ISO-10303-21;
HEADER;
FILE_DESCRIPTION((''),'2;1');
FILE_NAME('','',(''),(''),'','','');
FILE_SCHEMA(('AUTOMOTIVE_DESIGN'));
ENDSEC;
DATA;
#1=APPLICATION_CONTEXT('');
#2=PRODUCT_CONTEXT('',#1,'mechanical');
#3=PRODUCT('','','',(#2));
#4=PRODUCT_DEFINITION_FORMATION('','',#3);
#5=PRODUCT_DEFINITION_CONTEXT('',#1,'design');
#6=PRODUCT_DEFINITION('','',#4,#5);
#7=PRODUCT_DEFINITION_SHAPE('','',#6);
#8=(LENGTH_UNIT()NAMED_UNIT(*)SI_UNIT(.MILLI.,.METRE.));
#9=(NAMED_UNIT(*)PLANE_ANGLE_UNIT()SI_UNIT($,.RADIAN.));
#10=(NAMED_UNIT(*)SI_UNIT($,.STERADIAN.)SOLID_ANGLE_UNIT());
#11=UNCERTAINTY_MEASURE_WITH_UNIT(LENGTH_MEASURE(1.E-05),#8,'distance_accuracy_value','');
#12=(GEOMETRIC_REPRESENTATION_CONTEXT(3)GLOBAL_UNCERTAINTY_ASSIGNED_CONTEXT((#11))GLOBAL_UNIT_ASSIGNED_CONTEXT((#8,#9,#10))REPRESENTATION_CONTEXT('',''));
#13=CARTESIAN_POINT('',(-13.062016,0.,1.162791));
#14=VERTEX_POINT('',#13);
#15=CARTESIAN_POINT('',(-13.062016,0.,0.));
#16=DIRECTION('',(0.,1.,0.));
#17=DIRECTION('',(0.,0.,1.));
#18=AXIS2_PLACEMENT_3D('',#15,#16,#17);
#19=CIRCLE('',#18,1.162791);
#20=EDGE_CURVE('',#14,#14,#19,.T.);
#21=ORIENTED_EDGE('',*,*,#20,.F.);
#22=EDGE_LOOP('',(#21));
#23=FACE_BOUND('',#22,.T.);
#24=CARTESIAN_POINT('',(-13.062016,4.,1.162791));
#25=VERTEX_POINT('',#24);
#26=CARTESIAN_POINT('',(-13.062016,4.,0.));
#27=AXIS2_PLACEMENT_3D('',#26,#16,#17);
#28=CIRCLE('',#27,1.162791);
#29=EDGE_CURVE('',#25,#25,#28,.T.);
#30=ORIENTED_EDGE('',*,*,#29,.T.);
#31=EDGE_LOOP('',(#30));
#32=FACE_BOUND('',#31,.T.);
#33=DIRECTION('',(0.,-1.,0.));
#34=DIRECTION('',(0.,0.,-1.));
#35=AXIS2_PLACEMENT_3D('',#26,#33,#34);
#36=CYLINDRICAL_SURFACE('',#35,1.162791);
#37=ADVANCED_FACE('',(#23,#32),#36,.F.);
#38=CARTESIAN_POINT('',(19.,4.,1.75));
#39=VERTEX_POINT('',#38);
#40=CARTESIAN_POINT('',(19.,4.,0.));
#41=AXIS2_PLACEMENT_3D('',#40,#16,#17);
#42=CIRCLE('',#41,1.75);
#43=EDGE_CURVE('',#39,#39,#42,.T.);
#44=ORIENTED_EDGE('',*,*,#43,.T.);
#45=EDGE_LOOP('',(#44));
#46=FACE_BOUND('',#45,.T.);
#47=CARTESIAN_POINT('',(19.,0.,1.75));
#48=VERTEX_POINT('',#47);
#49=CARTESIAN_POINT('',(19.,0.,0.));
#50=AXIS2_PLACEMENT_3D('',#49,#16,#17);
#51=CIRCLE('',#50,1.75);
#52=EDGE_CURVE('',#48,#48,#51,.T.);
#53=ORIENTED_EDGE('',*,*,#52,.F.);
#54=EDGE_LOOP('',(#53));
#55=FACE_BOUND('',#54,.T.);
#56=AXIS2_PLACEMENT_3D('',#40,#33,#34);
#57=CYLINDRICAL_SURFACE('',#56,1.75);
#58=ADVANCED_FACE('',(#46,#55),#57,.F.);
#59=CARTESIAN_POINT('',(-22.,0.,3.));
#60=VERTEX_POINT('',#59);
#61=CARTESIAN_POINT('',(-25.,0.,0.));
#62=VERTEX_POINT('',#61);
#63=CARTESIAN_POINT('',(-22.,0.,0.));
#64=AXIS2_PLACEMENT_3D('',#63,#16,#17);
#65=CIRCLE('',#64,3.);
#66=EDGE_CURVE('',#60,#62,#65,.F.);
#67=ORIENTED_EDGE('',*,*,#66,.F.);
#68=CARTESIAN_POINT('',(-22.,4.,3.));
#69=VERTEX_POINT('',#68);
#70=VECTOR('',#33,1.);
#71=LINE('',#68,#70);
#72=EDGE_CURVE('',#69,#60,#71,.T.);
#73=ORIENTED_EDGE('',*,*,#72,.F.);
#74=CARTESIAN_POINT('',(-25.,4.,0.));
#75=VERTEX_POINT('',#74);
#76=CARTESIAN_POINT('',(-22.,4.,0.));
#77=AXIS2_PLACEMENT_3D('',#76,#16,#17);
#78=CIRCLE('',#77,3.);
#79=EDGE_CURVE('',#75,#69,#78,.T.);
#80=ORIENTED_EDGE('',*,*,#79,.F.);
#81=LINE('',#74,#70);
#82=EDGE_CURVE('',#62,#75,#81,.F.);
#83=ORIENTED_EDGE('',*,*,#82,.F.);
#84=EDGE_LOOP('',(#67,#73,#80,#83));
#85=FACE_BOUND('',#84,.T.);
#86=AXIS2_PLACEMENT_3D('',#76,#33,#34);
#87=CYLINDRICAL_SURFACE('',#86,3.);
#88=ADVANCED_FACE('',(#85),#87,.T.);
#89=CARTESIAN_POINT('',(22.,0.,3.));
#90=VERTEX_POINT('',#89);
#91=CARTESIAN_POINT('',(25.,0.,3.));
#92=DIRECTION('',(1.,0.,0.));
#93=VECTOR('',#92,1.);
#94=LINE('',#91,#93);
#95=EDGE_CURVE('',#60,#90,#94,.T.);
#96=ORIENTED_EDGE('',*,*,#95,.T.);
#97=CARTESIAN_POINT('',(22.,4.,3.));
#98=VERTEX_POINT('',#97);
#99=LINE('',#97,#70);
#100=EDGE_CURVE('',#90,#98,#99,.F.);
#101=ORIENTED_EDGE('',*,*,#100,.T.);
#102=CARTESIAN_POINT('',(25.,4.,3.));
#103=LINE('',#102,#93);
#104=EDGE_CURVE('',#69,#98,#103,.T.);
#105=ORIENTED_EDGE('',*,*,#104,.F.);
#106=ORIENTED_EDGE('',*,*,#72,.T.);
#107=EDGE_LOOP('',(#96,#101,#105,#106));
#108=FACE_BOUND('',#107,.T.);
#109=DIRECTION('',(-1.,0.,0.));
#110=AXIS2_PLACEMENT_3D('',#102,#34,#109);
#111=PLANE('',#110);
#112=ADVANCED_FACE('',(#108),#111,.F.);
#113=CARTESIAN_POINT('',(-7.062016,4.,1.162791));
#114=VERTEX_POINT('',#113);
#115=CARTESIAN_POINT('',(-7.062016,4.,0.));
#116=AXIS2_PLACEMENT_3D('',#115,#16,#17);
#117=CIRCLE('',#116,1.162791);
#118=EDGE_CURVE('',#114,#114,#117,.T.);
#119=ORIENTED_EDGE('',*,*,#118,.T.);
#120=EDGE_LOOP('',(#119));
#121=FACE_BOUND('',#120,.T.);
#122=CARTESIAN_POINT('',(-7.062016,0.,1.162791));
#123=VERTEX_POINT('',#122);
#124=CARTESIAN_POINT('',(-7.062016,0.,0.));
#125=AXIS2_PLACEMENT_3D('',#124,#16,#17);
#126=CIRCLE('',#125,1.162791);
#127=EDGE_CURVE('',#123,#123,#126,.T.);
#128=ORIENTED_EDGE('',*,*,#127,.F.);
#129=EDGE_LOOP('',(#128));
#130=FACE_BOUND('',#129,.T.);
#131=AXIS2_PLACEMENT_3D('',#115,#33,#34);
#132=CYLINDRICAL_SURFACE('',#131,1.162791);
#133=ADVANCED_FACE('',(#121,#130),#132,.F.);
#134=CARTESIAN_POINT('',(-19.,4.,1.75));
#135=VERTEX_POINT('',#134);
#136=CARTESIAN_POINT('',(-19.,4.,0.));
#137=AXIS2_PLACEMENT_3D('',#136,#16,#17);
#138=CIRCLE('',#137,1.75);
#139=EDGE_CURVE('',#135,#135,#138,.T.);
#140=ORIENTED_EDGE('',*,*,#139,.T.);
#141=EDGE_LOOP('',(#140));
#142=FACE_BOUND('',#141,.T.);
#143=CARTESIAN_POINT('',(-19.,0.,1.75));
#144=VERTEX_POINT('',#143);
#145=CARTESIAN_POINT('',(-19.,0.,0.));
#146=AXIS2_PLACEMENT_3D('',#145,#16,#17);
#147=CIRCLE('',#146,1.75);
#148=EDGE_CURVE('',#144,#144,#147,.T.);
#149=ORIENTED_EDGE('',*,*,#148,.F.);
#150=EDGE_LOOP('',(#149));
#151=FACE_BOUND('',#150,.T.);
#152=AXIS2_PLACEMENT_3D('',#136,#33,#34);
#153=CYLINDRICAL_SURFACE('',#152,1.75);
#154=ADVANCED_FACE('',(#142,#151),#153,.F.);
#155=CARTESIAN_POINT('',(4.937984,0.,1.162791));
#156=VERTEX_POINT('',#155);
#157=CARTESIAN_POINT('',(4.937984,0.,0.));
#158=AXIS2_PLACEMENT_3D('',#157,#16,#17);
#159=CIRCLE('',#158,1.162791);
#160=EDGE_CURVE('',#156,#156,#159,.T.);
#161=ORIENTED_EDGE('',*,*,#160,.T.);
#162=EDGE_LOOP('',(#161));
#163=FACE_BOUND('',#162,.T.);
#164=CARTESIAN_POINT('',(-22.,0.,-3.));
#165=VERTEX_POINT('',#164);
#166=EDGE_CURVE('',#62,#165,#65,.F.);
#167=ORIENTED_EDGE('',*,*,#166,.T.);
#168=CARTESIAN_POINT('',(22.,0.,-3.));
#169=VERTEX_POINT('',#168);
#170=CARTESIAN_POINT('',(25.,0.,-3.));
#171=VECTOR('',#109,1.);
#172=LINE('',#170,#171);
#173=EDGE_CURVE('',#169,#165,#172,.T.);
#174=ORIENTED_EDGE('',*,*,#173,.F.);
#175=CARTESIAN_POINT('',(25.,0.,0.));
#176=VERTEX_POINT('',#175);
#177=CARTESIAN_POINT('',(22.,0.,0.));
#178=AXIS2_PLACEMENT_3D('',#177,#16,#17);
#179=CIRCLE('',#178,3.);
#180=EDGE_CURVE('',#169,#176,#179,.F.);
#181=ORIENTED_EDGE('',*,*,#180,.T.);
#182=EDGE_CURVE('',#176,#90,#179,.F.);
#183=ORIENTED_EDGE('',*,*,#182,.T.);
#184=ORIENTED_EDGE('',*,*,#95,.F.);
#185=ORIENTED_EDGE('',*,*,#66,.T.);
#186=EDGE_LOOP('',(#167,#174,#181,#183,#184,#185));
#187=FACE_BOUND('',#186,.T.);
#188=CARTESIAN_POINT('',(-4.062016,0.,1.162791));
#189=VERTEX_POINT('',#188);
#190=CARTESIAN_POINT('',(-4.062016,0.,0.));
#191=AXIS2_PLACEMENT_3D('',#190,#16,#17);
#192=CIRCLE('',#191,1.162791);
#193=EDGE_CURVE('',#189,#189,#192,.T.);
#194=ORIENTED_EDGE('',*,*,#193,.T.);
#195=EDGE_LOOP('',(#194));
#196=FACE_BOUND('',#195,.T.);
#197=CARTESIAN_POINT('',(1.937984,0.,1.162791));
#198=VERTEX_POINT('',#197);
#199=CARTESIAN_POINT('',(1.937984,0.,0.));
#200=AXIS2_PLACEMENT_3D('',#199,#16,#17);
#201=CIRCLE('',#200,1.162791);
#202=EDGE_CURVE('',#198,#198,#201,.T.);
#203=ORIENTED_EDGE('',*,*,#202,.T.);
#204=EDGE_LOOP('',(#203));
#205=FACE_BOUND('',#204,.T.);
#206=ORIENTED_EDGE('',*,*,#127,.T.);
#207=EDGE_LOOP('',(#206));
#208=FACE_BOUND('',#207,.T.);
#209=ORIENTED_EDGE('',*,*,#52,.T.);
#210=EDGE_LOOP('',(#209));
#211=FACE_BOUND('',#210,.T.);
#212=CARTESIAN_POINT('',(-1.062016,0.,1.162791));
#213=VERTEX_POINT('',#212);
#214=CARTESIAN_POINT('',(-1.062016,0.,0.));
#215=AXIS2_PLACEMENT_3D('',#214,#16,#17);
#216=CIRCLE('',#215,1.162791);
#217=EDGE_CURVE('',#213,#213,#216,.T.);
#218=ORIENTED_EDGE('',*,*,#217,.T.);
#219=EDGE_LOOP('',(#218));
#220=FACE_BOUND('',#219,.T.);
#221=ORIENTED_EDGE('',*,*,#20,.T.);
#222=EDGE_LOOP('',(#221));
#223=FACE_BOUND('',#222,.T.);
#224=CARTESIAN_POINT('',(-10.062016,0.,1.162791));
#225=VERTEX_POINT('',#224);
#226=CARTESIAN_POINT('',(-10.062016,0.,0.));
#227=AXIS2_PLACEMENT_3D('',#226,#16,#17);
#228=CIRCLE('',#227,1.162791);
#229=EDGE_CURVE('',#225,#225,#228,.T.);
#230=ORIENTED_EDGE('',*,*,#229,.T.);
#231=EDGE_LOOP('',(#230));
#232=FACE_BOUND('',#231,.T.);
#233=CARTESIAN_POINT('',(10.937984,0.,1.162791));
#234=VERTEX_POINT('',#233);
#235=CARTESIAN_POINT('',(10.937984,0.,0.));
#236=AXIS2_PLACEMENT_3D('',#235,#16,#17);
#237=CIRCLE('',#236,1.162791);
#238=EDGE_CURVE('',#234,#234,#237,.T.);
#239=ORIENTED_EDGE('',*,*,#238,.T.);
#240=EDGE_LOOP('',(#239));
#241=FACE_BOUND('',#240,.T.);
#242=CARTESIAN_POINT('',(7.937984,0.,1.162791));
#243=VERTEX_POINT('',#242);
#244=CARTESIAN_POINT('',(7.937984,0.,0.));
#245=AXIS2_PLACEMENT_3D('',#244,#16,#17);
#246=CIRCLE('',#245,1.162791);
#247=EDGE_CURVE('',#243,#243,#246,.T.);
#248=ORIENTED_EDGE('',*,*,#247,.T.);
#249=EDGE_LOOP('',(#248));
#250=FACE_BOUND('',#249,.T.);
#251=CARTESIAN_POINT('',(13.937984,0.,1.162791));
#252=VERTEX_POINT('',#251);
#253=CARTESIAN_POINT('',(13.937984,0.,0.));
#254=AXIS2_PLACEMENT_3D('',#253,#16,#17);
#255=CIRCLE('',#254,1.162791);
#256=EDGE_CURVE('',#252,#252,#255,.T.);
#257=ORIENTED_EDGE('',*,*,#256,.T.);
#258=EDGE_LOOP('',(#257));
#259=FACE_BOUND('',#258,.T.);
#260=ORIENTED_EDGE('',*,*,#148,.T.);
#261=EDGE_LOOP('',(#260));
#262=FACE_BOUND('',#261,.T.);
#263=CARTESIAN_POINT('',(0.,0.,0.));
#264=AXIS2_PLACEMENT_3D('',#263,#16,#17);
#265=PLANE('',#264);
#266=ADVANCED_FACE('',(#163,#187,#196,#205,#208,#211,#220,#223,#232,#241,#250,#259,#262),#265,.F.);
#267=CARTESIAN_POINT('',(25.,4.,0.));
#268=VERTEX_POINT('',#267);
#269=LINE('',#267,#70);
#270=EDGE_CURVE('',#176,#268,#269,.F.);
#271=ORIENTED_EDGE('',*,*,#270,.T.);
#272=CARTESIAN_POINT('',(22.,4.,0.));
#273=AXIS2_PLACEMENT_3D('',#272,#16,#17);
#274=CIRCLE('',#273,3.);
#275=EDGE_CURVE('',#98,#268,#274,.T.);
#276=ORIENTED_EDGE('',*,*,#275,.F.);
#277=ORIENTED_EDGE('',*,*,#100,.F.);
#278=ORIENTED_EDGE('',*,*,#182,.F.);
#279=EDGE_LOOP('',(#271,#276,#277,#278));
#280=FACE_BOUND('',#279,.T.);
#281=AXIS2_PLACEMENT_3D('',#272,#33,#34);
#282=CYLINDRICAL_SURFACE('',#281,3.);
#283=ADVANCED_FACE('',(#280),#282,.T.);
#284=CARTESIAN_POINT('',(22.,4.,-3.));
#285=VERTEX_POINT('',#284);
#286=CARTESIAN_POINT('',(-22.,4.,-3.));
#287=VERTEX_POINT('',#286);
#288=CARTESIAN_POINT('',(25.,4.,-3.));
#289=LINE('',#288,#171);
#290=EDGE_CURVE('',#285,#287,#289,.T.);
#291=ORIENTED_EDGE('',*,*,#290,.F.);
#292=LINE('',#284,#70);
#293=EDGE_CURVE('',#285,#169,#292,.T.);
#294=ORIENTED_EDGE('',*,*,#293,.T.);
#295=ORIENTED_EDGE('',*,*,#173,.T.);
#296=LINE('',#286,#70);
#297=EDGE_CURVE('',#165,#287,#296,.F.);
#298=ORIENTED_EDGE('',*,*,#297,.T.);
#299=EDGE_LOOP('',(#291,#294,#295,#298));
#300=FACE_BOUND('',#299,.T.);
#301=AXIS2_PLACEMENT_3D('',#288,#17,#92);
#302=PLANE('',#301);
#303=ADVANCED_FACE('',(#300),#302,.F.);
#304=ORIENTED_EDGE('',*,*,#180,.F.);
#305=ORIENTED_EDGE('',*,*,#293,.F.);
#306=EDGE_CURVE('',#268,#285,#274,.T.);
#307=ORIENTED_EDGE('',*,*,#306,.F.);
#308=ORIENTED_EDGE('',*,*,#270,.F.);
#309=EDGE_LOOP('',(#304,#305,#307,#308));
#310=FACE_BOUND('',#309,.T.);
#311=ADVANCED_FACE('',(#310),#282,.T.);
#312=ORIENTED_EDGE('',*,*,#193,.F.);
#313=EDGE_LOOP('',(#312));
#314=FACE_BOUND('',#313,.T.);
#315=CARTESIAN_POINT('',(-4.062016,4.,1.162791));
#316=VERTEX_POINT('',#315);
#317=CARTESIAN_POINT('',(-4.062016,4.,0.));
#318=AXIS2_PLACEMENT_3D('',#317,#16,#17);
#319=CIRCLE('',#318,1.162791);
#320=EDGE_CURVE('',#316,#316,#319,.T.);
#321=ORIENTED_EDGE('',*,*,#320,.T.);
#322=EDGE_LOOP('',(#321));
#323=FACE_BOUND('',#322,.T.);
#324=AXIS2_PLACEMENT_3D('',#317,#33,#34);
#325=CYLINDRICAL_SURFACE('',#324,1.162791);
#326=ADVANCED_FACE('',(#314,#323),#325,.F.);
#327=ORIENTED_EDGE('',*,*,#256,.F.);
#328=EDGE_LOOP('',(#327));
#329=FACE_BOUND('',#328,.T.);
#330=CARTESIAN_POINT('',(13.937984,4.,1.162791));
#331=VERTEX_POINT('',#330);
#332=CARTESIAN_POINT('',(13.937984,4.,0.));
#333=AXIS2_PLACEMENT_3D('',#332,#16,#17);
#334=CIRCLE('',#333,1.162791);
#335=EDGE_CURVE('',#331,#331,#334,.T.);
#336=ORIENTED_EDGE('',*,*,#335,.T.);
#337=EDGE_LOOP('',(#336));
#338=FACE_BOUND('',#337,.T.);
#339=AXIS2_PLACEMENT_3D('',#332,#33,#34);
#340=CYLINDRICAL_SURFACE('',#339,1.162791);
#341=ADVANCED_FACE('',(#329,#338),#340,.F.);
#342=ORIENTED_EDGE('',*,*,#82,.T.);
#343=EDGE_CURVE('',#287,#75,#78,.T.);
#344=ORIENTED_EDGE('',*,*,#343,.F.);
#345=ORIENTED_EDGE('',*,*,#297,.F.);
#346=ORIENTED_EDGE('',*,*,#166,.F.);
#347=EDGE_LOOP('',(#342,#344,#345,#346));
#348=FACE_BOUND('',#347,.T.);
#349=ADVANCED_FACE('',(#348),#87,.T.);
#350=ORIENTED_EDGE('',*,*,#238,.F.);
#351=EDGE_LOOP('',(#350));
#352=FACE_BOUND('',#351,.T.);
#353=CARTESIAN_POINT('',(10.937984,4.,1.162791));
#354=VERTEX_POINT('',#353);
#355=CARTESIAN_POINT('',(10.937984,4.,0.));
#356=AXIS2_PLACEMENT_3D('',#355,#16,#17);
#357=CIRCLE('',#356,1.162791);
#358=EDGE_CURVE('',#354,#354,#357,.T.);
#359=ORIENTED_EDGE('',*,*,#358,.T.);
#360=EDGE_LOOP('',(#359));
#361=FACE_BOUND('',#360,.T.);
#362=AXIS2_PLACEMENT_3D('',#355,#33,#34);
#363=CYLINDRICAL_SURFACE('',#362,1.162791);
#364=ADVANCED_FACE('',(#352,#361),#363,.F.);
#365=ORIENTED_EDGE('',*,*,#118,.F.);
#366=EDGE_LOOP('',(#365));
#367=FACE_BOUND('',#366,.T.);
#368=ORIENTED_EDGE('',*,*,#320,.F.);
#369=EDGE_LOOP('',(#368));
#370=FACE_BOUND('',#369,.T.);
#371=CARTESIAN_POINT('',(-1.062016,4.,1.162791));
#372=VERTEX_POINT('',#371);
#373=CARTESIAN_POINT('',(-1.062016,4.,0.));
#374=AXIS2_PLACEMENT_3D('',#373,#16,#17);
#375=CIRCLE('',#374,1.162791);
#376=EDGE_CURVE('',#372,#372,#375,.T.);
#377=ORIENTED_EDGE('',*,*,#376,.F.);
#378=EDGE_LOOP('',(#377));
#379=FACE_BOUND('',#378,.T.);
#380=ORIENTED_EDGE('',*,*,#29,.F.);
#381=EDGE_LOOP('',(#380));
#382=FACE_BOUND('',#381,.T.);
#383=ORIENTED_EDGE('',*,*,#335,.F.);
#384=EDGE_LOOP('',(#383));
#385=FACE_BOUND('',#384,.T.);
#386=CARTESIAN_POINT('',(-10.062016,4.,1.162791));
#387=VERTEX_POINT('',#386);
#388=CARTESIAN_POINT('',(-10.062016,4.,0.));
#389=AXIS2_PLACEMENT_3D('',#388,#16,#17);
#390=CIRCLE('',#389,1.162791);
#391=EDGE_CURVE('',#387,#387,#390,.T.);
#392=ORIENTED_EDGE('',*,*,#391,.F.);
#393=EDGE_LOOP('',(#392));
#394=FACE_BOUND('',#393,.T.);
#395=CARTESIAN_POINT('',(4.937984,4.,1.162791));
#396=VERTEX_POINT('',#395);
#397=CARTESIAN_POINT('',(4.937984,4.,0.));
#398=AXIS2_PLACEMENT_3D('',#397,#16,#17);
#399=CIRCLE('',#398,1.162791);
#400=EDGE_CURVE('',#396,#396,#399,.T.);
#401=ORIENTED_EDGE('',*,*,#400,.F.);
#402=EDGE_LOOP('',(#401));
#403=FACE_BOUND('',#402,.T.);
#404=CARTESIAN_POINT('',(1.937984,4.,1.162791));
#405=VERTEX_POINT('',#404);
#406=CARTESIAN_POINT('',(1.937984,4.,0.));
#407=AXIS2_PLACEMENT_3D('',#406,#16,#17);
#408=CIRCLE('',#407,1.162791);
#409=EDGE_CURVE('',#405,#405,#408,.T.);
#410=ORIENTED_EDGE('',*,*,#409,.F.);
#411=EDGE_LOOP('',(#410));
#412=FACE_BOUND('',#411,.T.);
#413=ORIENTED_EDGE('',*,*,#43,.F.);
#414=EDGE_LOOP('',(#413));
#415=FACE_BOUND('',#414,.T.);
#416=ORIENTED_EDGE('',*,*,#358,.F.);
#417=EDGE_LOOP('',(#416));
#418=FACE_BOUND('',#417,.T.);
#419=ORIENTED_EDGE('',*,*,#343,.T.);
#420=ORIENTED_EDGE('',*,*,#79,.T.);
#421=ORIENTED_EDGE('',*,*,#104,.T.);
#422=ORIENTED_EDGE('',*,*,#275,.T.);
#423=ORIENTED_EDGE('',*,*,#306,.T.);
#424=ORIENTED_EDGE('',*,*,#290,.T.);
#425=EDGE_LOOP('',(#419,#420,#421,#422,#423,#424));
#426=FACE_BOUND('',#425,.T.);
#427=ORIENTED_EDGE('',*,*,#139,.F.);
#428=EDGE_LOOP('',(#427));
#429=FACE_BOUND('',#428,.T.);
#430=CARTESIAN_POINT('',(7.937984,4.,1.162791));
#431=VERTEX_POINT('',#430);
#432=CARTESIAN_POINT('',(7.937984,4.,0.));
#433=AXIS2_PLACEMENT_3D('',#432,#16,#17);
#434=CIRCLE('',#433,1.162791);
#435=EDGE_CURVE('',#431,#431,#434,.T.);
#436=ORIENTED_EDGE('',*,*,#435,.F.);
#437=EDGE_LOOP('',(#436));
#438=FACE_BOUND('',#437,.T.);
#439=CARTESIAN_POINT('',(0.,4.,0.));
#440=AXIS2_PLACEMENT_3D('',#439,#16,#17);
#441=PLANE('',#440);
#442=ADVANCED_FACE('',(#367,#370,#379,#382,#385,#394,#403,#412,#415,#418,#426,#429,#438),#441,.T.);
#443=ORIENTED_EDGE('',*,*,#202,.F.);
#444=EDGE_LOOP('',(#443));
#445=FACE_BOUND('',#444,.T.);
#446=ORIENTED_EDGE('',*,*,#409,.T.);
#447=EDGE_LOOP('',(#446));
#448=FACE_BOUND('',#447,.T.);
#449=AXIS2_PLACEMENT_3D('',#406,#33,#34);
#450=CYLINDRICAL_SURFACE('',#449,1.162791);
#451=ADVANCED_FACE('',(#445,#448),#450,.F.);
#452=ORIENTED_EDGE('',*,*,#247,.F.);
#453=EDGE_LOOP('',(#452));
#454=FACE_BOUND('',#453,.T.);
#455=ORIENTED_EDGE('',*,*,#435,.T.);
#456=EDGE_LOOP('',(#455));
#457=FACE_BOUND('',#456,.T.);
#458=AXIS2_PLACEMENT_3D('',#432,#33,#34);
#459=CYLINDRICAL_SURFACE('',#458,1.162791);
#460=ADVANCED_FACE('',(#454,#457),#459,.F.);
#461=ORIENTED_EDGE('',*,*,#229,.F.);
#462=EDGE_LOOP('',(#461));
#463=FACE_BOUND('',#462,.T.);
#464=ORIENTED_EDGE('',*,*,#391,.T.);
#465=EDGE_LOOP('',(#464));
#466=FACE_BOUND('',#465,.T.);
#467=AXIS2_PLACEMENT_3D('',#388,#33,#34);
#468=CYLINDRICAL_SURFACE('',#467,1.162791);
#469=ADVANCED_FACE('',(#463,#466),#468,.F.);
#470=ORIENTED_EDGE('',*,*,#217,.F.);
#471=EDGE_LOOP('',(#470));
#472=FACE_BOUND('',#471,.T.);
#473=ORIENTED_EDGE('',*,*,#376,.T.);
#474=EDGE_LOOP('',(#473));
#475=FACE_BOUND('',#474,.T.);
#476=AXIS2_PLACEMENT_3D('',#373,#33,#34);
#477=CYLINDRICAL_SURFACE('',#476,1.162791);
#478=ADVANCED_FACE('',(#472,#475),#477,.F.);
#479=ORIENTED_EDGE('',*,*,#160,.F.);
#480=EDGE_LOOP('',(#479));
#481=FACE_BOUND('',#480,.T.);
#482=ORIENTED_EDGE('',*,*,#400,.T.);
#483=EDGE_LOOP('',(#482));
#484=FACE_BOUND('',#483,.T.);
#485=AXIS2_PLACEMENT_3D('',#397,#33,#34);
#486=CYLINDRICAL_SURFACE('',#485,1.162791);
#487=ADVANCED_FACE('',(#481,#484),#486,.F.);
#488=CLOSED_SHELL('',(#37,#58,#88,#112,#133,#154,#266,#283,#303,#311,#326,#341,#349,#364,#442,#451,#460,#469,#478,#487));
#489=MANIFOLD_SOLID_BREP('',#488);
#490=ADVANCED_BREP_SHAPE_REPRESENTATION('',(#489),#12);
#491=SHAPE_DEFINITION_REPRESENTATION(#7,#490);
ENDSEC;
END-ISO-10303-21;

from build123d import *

# Parameters (mm, degrees)
SKETCH_1_W      = 50
SKETCH_1_H      = 6
SKETCH_1_R      = 1.75
SKETCH_1_R_2    = 1.162790698
EXTRUDE_1_DEPTH = 4
FILLET_1_R      = 3


with BuildPart() as part:
    # 草圖1 → 填料-伸長1 (new body)
    with BuildSketch(Plane(origin=(0, 0, 0), x_dir=(1, 0, 0), z_dir=(0, 1, 0))):
        Rectangle(SKETCH_1_W, SKETCH_1_H)
        with Locations(Location((-19, 0, 0), (0, 0, 270))):
            Circle(SKETCH_1_R, mode=Mode.SUBTRACT)
        with Locations(Location((19, 0, 0), (0, 0, 270))):
            Circle(SKETCH_1_R, mode=Mode.SUBTRACT)
        with Locations(Location((-13.062015504, 0, 0), (0, 0, 270))):
            Circle(SKETCH_1_R_2, mode=Mode.SUBTRACT)
        with Locations(Location((-10.062015504, 0, 0), (0, 0, 270))):
            Circle(SKETCH_1_R_2, mode=Mode.SUBTRACT)
        with Locations(Location((-7.062015504, 0, 0), (0, 0, 270))):
            Circle(SKETCH_1_R_2, mode=Mode.SUBTRACT)
        with Locations(Location((-4.062015504, 0, 0), (0, 0, 270))):
            Circle(SKETCH_1_R_2, mode=Mode.SUBTRACT)
        with Locations(Location((-1.062015504, 0, 0), (0, 0, 270))):
            Circle(SKETCH_1_R_2, mode=Mode.SUBTRACT)
        with Locations(Location((1.937984496, 0, 0), (0, 0, 270))):
            Circle(SKETCH_1_R_2, mode=Mode.SUBTRACT)
        with Locations(Location((4.937984496, 0, 0), (0, 0, 270))):
            Circle(SKETCH_1_R_2, mode=Mode.SUBTRACT)
        with Locations(Location((7.937984496, 0, 0), (0, 0, 270))):
            Circle(SKETCH_1_R_2, mode=Mode.SUBTRACT)
        with Locations(Location((10.937984496, 0, 0), (0, 0, 270))):
            Circle(SKETCH_1_R_2, mode=Mode.SUBTRACT)
        with Locations(Location((13.937984496, 0, 0), (0, 0, 270))):
            Circle(SKETCH_1_R_2, mode=Mode.SUBTRACT)
    extrude(amount=EXTRUDE_1_DEPTH)

    # 圓角1
    fillet_1_edges = [part.edges().sort_by_distance(p)[0] for p in [
        (25, 2, 3),
        (25, 2, -3),
        (-25, 2, -3),
        (-25, 2, 3),
    ]]
    fillet(fillet_1_edges, radius=FILLET_1_R - 0.0001)  # a hair under: the kernel refuses the full size


solid = part.part
